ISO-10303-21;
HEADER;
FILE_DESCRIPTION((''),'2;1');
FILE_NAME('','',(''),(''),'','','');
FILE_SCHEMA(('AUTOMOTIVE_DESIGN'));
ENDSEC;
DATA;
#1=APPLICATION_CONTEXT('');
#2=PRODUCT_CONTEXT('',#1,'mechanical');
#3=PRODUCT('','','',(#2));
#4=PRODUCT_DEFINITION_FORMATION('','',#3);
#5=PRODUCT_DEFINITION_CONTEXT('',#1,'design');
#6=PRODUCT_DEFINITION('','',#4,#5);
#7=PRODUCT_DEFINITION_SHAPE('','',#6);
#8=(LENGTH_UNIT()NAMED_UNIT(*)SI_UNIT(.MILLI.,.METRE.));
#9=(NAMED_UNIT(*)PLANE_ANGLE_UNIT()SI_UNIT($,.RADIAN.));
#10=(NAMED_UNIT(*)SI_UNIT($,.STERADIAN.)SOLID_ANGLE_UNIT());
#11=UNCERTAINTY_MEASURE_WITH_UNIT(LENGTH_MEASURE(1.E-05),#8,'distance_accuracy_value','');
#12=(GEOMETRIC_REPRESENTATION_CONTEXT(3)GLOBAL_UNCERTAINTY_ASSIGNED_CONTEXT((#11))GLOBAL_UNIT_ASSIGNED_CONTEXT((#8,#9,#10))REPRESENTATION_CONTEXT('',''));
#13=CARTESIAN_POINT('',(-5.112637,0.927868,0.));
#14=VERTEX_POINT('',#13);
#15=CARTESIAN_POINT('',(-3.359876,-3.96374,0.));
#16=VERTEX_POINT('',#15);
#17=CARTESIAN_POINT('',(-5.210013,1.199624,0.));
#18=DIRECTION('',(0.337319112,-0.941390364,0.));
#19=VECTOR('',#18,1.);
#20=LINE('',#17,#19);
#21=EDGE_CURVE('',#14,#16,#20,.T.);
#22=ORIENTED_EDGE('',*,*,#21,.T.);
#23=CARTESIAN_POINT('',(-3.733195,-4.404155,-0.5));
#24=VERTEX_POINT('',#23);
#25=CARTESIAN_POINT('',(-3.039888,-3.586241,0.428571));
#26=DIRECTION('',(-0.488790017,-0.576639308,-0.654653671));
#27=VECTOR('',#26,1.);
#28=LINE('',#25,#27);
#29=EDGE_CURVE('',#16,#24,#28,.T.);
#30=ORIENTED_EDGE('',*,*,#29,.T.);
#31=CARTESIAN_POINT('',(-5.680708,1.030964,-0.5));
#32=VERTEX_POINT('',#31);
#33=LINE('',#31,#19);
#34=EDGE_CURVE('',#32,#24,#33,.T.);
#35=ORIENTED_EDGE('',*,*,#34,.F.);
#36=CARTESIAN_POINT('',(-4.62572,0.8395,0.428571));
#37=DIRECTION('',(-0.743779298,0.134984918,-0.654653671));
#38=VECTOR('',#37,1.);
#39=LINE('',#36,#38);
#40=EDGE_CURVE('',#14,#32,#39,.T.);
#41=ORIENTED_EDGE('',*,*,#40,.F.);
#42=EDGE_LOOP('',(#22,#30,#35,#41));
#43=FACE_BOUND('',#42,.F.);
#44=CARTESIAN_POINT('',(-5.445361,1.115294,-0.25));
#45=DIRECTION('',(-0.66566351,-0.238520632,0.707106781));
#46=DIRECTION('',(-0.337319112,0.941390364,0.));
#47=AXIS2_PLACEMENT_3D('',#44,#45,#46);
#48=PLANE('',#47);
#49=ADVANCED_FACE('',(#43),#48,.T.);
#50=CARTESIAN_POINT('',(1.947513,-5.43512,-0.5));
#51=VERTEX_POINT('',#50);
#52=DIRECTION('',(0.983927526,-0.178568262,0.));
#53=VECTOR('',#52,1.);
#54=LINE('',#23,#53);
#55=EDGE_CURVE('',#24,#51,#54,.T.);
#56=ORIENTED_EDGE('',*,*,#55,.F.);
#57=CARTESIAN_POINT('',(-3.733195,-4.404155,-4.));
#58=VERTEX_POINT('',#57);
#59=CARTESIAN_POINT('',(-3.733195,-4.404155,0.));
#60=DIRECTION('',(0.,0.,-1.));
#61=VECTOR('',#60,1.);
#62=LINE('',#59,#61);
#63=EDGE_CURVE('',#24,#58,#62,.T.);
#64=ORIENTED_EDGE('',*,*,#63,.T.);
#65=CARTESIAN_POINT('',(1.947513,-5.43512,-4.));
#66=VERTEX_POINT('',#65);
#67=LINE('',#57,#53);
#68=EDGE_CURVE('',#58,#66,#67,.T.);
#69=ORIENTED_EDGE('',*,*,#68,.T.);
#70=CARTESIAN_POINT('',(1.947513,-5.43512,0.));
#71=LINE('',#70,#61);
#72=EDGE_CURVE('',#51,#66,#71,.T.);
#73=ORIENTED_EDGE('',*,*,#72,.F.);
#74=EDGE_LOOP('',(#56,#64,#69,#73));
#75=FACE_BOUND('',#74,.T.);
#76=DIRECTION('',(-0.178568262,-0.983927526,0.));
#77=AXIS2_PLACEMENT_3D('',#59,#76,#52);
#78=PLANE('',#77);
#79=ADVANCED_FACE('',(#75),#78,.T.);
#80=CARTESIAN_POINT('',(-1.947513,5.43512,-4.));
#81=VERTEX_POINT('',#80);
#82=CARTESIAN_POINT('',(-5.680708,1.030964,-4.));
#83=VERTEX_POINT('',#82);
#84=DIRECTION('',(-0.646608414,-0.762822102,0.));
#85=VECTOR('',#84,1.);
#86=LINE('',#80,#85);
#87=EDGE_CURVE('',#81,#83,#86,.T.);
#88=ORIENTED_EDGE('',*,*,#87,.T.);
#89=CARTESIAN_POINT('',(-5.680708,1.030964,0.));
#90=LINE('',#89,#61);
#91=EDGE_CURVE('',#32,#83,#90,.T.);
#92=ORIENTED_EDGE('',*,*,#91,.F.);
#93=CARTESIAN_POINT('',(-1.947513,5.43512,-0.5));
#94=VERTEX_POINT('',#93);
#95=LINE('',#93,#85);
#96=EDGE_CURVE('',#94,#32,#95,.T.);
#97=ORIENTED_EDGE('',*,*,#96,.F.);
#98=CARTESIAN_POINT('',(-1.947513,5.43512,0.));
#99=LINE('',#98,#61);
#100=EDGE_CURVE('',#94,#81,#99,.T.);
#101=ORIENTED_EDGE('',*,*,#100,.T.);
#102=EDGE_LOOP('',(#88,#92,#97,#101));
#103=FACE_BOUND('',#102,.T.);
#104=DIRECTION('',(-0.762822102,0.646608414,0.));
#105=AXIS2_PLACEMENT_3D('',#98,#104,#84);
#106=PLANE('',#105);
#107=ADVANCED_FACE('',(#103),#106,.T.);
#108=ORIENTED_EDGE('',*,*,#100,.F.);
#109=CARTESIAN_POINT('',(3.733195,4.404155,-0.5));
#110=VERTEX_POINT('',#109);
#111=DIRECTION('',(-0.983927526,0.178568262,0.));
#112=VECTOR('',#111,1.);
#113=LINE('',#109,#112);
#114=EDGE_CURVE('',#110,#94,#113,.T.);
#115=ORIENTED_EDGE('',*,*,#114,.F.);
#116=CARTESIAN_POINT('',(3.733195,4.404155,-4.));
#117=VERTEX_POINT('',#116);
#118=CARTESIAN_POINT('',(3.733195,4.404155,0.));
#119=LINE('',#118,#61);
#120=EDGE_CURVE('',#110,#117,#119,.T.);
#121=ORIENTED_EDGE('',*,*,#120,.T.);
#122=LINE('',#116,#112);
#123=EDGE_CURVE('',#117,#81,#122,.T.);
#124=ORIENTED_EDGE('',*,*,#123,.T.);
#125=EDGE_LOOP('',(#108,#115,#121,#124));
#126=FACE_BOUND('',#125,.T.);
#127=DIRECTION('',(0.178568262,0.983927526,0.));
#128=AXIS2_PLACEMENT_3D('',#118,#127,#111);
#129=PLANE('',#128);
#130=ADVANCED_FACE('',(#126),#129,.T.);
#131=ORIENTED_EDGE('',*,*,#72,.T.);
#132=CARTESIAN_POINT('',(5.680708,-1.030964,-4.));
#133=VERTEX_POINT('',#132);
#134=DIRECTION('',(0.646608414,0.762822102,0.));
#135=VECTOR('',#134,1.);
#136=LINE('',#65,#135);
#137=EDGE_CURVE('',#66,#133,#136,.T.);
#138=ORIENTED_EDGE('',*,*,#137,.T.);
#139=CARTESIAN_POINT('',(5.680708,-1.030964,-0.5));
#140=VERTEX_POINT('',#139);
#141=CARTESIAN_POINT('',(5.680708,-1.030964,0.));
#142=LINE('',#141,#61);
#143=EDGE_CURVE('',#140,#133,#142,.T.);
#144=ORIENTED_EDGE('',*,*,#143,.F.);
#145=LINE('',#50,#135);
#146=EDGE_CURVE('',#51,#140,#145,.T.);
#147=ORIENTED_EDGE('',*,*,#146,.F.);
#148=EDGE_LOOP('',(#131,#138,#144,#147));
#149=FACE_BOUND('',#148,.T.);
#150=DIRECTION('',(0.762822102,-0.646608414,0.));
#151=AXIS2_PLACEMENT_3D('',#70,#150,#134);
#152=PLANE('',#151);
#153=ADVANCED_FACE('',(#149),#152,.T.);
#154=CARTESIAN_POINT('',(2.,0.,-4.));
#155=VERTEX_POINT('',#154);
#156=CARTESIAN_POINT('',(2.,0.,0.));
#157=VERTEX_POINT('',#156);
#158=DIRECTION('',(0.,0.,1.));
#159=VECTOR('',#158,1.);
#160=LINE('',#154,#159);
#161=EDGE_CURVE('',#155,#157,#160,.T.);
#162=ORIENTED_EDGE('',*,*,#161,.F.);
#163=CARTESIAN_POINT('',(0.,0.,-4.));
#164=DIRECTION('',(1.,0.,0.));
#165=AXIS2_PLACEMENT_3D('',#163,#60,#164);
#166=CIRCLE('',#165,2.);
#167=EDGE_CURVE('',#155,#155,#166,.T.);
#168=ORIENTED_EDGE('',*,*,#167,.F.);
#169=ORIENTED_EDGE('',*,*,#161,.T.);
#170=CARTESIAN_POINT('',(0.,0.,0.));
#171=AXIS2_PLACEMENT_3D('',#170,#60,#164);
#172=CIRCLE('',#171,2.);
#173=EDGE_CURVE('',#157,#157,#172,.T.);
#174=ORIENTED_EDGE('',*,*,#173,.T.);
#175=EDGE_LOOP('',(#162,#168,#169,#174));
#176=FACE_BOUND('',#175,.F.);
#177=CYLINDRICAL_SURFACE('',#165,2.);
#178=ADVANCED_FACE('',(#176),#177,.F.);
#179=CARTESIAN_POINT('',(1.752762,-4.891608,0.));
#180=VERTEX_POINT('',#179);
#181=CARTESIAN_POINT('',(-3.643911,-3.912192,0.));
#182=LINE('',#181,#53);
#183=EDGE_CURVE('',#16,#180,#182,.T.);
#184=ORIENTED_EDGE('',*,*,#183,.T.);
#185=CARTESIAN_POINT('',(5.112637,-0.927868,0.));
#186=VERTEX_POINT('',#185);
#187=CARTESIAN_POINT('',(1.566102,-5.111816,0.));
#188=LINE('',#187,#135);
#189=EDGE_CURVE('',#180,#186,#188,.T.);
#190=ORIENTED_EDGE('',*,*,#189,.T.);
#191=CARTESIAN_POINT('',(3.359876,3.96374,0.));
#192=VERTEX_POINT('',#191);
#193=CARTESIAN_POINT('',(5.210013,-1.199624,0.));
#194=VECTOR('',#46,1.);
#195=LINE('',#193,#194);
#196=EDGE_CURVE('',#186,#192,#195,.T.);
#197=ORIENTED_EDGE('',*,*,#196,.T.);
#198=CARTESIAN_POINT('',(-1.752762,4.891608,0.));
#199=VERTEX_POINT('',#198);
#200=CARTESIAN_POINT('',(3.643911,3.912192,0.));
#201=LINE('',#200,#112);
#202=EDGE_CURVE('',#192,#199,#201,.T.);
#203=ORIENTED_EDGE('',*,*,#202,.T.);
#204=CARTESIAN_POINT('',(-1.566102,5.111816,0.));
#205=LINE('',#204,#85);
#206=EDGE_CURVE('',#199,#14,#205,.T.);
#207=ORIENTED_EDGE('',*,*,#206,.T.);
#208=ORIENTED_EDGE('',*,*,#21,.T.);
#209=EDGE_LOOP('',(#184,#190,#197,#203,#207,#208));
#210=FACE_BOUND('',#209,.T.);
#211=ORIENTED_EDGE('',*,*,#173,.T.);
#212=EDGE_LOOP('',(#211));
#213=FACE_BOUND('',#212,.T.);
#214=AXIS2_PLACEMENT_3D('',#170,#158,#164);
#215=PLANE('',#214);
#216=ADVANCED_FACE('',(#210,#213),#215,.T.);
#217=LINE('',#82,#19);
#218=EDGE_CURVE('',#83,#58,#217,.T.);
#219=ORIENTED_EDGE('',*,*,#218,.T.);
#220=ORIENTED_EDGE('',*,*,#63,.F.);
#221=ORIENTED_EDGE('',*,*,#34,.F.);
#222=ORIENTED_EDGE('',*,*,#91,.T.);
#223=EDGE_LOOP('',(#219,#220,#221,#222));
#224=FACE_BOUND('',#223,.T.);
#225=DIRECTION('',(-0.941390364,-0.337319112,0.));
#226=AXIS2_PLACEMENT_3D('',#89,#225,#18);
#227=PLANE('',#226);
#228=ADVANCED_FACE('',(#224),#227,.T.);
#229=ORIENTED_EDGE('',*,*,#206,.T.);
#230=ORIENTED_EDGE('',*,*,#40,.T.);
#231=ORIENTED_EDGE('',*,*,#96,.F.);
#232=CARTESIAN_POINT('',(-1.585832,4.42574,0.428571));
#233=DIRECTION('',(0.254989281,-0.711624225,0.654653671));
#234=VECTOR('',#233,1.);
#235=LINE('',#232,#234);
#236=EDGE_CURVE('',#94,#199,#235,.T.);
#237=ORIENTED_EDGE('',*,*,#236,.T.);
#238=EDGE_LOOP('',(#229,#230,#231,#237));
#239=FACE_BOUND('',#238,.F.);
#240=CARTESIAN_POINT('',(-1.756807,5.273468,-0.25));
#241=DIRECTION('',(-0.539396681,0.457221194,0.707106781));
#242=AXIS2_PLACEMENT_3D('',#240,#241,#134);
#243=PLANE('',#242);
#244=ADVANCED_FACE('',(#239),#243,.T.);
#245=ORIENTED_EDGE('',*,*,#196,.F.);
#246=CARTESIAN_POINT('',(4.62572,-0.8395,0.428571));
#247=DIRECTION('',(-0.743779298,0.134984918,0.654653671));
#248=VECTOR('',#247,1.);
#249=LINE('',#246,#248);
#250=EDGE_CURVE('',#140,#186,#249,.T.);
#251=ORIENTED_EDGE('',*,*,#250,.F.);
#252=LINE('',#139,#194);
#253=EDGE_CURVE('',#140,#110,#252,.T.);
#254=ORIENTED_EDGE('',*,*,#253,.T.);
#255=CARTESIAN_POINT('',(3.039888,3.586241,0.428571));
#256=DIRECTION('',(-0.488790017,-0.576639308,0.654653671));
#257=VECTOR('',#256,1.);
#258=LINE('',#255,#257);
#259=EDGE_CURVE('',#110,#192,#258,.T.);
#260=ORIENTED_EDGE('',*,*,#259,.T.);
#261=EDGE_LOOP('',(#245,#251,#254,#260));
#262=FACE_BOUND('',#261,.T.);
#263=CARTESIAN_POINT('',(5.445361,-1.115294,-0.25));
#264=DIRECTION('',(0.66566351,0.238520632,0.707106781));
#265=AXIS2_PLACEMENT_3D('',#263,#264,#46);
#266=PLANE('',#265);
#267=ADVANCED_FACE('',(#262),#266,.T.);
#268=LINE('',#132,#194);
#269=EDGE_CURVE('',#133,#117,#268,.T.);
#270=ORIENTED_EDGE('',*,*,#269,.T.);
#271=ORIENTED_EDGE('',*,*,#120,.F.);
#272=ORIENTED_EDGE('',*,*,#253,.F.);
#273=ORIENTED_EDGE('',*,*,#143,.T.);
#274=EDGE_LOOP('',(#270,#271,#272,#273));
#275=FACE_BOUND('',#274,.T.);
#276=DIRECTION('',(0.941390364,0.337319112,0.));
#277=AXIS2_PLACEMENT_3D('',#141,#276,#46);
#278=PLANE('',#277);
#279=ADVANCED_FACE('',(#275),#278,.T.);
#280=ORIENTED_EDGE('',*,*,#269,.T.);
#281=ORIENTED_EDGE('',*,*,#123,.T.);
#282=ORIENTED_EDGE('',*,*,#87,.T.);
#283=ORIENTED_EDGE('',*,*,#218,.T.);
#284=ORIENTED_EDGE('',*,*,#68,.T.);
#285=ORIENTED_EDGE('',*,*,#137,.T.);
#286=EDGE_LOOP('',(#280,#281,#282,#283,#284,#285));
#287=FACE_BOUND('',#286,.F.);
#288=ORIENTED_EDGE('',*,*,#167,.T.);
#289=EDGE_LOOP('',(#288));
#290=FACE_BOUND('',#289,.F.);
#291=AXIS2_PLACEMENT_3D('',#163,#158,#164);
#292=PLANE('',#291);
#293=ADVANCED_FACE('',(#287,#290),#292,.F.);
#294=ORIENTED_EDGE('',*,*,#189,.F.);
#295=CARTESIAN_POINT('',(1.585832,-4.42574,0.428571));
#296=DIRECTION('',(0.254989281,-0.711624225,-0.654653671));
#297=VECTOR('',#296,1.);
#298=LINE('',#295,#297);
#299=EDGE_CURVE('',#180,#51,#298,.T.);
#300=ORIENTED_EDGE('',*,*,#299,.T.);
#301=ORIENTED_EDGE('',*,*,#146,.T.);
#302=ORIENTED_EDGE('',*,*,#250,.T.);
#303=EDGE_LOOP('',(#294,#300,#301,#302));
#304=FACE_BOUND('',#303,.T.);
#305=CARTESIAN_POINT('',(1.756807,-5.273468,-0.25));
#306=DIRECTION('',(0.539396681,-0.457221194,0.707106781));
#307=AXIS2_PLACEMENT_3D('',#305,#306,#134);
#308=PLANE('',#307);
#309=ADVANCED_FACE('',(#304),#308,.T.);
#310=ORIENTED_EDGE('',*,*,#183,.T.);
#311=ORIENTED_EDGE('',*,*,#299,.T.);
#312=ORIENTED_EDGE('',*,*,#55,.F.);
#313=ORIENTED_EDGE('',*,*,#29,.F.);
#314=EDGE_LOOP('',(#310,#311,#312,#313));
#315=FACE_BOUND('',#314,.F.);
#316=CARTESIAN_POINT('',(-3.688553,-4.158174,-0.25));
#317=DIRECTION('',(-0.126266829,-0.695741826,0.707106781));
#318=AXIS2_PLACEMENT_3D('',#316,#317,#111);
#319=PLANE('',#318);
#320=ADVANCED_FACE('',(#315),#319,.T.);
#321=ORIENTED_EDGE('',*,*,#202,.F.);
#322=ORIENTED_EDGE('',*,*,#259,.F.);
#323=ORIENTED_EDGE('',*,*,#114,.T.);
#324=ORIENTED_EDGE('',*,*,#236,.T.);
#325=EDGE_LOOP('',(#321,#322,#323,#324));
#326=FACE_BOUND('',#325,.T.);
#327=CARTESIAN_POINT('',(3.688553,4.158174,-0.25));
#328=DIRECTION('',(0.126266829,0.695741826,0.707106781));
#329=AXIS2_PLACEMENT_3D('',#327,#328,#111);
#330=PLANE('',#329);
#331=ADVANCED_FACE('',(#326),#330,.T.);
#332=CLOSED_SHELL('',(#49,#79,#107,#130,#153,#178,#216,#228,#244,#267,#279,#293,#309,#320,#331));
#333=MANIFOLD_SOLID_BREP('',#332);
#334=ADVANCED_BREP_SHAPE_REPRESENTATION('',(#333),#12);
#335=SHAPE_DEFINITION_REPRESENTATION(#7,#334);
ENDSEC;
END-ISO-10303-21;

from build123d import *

# Parameters (mm, degrees)
F3_DEPTH = 4
F4_R     = 2
F5_DEPTH = 4
F6_SIZE  = 0.5


# Not quite as in the source:
# - the program builds the solid bodies; features that only make, move or delete a surface that nothing else refers to are left out


with BuildPart() as f3:
    # F2 (on Top) → F3 (new body)
    with BuildSketch(Plane.XY):
        Polygon((5.6807082187, -1.0309643387), (3.7331954171, 4.4041554595), (-1.9475128016, 5.4351197982), (-5.6807082187, 1.0309643387), (-3.7331954171, -4.4041554595), (1.9475128016, -5.4351197982), align=None)
    extrude(amount=-F3_DEPTH)

    # F4 (on face) → F5 (cut)
    with BuildSketch(Plane(origin=(0, 0, -4), x_dir=(1, 0, 0), z_dir=(0, 0, -1))):
        Circle(F4_R)
    extrude(amount=-F5_DEPTH, mode=Mode.SUBTRACT)

    # F6
    f6_edges = [f3.edges().sort_by_distance(p)[0] for p in [
        (-0.892841, -4.919638, 0),
        (3.814111, -3.233042, 0),
        (4.706952, 1.686596, 0),
        (0.892841, 4.919638, 0),
        (-3.814111, 3.233042, 0),
        (-4.706952, -1.686596, 0),
    ]]
    chamfer(f6_edges, length=F6_SIZE)


solid = f3.part
